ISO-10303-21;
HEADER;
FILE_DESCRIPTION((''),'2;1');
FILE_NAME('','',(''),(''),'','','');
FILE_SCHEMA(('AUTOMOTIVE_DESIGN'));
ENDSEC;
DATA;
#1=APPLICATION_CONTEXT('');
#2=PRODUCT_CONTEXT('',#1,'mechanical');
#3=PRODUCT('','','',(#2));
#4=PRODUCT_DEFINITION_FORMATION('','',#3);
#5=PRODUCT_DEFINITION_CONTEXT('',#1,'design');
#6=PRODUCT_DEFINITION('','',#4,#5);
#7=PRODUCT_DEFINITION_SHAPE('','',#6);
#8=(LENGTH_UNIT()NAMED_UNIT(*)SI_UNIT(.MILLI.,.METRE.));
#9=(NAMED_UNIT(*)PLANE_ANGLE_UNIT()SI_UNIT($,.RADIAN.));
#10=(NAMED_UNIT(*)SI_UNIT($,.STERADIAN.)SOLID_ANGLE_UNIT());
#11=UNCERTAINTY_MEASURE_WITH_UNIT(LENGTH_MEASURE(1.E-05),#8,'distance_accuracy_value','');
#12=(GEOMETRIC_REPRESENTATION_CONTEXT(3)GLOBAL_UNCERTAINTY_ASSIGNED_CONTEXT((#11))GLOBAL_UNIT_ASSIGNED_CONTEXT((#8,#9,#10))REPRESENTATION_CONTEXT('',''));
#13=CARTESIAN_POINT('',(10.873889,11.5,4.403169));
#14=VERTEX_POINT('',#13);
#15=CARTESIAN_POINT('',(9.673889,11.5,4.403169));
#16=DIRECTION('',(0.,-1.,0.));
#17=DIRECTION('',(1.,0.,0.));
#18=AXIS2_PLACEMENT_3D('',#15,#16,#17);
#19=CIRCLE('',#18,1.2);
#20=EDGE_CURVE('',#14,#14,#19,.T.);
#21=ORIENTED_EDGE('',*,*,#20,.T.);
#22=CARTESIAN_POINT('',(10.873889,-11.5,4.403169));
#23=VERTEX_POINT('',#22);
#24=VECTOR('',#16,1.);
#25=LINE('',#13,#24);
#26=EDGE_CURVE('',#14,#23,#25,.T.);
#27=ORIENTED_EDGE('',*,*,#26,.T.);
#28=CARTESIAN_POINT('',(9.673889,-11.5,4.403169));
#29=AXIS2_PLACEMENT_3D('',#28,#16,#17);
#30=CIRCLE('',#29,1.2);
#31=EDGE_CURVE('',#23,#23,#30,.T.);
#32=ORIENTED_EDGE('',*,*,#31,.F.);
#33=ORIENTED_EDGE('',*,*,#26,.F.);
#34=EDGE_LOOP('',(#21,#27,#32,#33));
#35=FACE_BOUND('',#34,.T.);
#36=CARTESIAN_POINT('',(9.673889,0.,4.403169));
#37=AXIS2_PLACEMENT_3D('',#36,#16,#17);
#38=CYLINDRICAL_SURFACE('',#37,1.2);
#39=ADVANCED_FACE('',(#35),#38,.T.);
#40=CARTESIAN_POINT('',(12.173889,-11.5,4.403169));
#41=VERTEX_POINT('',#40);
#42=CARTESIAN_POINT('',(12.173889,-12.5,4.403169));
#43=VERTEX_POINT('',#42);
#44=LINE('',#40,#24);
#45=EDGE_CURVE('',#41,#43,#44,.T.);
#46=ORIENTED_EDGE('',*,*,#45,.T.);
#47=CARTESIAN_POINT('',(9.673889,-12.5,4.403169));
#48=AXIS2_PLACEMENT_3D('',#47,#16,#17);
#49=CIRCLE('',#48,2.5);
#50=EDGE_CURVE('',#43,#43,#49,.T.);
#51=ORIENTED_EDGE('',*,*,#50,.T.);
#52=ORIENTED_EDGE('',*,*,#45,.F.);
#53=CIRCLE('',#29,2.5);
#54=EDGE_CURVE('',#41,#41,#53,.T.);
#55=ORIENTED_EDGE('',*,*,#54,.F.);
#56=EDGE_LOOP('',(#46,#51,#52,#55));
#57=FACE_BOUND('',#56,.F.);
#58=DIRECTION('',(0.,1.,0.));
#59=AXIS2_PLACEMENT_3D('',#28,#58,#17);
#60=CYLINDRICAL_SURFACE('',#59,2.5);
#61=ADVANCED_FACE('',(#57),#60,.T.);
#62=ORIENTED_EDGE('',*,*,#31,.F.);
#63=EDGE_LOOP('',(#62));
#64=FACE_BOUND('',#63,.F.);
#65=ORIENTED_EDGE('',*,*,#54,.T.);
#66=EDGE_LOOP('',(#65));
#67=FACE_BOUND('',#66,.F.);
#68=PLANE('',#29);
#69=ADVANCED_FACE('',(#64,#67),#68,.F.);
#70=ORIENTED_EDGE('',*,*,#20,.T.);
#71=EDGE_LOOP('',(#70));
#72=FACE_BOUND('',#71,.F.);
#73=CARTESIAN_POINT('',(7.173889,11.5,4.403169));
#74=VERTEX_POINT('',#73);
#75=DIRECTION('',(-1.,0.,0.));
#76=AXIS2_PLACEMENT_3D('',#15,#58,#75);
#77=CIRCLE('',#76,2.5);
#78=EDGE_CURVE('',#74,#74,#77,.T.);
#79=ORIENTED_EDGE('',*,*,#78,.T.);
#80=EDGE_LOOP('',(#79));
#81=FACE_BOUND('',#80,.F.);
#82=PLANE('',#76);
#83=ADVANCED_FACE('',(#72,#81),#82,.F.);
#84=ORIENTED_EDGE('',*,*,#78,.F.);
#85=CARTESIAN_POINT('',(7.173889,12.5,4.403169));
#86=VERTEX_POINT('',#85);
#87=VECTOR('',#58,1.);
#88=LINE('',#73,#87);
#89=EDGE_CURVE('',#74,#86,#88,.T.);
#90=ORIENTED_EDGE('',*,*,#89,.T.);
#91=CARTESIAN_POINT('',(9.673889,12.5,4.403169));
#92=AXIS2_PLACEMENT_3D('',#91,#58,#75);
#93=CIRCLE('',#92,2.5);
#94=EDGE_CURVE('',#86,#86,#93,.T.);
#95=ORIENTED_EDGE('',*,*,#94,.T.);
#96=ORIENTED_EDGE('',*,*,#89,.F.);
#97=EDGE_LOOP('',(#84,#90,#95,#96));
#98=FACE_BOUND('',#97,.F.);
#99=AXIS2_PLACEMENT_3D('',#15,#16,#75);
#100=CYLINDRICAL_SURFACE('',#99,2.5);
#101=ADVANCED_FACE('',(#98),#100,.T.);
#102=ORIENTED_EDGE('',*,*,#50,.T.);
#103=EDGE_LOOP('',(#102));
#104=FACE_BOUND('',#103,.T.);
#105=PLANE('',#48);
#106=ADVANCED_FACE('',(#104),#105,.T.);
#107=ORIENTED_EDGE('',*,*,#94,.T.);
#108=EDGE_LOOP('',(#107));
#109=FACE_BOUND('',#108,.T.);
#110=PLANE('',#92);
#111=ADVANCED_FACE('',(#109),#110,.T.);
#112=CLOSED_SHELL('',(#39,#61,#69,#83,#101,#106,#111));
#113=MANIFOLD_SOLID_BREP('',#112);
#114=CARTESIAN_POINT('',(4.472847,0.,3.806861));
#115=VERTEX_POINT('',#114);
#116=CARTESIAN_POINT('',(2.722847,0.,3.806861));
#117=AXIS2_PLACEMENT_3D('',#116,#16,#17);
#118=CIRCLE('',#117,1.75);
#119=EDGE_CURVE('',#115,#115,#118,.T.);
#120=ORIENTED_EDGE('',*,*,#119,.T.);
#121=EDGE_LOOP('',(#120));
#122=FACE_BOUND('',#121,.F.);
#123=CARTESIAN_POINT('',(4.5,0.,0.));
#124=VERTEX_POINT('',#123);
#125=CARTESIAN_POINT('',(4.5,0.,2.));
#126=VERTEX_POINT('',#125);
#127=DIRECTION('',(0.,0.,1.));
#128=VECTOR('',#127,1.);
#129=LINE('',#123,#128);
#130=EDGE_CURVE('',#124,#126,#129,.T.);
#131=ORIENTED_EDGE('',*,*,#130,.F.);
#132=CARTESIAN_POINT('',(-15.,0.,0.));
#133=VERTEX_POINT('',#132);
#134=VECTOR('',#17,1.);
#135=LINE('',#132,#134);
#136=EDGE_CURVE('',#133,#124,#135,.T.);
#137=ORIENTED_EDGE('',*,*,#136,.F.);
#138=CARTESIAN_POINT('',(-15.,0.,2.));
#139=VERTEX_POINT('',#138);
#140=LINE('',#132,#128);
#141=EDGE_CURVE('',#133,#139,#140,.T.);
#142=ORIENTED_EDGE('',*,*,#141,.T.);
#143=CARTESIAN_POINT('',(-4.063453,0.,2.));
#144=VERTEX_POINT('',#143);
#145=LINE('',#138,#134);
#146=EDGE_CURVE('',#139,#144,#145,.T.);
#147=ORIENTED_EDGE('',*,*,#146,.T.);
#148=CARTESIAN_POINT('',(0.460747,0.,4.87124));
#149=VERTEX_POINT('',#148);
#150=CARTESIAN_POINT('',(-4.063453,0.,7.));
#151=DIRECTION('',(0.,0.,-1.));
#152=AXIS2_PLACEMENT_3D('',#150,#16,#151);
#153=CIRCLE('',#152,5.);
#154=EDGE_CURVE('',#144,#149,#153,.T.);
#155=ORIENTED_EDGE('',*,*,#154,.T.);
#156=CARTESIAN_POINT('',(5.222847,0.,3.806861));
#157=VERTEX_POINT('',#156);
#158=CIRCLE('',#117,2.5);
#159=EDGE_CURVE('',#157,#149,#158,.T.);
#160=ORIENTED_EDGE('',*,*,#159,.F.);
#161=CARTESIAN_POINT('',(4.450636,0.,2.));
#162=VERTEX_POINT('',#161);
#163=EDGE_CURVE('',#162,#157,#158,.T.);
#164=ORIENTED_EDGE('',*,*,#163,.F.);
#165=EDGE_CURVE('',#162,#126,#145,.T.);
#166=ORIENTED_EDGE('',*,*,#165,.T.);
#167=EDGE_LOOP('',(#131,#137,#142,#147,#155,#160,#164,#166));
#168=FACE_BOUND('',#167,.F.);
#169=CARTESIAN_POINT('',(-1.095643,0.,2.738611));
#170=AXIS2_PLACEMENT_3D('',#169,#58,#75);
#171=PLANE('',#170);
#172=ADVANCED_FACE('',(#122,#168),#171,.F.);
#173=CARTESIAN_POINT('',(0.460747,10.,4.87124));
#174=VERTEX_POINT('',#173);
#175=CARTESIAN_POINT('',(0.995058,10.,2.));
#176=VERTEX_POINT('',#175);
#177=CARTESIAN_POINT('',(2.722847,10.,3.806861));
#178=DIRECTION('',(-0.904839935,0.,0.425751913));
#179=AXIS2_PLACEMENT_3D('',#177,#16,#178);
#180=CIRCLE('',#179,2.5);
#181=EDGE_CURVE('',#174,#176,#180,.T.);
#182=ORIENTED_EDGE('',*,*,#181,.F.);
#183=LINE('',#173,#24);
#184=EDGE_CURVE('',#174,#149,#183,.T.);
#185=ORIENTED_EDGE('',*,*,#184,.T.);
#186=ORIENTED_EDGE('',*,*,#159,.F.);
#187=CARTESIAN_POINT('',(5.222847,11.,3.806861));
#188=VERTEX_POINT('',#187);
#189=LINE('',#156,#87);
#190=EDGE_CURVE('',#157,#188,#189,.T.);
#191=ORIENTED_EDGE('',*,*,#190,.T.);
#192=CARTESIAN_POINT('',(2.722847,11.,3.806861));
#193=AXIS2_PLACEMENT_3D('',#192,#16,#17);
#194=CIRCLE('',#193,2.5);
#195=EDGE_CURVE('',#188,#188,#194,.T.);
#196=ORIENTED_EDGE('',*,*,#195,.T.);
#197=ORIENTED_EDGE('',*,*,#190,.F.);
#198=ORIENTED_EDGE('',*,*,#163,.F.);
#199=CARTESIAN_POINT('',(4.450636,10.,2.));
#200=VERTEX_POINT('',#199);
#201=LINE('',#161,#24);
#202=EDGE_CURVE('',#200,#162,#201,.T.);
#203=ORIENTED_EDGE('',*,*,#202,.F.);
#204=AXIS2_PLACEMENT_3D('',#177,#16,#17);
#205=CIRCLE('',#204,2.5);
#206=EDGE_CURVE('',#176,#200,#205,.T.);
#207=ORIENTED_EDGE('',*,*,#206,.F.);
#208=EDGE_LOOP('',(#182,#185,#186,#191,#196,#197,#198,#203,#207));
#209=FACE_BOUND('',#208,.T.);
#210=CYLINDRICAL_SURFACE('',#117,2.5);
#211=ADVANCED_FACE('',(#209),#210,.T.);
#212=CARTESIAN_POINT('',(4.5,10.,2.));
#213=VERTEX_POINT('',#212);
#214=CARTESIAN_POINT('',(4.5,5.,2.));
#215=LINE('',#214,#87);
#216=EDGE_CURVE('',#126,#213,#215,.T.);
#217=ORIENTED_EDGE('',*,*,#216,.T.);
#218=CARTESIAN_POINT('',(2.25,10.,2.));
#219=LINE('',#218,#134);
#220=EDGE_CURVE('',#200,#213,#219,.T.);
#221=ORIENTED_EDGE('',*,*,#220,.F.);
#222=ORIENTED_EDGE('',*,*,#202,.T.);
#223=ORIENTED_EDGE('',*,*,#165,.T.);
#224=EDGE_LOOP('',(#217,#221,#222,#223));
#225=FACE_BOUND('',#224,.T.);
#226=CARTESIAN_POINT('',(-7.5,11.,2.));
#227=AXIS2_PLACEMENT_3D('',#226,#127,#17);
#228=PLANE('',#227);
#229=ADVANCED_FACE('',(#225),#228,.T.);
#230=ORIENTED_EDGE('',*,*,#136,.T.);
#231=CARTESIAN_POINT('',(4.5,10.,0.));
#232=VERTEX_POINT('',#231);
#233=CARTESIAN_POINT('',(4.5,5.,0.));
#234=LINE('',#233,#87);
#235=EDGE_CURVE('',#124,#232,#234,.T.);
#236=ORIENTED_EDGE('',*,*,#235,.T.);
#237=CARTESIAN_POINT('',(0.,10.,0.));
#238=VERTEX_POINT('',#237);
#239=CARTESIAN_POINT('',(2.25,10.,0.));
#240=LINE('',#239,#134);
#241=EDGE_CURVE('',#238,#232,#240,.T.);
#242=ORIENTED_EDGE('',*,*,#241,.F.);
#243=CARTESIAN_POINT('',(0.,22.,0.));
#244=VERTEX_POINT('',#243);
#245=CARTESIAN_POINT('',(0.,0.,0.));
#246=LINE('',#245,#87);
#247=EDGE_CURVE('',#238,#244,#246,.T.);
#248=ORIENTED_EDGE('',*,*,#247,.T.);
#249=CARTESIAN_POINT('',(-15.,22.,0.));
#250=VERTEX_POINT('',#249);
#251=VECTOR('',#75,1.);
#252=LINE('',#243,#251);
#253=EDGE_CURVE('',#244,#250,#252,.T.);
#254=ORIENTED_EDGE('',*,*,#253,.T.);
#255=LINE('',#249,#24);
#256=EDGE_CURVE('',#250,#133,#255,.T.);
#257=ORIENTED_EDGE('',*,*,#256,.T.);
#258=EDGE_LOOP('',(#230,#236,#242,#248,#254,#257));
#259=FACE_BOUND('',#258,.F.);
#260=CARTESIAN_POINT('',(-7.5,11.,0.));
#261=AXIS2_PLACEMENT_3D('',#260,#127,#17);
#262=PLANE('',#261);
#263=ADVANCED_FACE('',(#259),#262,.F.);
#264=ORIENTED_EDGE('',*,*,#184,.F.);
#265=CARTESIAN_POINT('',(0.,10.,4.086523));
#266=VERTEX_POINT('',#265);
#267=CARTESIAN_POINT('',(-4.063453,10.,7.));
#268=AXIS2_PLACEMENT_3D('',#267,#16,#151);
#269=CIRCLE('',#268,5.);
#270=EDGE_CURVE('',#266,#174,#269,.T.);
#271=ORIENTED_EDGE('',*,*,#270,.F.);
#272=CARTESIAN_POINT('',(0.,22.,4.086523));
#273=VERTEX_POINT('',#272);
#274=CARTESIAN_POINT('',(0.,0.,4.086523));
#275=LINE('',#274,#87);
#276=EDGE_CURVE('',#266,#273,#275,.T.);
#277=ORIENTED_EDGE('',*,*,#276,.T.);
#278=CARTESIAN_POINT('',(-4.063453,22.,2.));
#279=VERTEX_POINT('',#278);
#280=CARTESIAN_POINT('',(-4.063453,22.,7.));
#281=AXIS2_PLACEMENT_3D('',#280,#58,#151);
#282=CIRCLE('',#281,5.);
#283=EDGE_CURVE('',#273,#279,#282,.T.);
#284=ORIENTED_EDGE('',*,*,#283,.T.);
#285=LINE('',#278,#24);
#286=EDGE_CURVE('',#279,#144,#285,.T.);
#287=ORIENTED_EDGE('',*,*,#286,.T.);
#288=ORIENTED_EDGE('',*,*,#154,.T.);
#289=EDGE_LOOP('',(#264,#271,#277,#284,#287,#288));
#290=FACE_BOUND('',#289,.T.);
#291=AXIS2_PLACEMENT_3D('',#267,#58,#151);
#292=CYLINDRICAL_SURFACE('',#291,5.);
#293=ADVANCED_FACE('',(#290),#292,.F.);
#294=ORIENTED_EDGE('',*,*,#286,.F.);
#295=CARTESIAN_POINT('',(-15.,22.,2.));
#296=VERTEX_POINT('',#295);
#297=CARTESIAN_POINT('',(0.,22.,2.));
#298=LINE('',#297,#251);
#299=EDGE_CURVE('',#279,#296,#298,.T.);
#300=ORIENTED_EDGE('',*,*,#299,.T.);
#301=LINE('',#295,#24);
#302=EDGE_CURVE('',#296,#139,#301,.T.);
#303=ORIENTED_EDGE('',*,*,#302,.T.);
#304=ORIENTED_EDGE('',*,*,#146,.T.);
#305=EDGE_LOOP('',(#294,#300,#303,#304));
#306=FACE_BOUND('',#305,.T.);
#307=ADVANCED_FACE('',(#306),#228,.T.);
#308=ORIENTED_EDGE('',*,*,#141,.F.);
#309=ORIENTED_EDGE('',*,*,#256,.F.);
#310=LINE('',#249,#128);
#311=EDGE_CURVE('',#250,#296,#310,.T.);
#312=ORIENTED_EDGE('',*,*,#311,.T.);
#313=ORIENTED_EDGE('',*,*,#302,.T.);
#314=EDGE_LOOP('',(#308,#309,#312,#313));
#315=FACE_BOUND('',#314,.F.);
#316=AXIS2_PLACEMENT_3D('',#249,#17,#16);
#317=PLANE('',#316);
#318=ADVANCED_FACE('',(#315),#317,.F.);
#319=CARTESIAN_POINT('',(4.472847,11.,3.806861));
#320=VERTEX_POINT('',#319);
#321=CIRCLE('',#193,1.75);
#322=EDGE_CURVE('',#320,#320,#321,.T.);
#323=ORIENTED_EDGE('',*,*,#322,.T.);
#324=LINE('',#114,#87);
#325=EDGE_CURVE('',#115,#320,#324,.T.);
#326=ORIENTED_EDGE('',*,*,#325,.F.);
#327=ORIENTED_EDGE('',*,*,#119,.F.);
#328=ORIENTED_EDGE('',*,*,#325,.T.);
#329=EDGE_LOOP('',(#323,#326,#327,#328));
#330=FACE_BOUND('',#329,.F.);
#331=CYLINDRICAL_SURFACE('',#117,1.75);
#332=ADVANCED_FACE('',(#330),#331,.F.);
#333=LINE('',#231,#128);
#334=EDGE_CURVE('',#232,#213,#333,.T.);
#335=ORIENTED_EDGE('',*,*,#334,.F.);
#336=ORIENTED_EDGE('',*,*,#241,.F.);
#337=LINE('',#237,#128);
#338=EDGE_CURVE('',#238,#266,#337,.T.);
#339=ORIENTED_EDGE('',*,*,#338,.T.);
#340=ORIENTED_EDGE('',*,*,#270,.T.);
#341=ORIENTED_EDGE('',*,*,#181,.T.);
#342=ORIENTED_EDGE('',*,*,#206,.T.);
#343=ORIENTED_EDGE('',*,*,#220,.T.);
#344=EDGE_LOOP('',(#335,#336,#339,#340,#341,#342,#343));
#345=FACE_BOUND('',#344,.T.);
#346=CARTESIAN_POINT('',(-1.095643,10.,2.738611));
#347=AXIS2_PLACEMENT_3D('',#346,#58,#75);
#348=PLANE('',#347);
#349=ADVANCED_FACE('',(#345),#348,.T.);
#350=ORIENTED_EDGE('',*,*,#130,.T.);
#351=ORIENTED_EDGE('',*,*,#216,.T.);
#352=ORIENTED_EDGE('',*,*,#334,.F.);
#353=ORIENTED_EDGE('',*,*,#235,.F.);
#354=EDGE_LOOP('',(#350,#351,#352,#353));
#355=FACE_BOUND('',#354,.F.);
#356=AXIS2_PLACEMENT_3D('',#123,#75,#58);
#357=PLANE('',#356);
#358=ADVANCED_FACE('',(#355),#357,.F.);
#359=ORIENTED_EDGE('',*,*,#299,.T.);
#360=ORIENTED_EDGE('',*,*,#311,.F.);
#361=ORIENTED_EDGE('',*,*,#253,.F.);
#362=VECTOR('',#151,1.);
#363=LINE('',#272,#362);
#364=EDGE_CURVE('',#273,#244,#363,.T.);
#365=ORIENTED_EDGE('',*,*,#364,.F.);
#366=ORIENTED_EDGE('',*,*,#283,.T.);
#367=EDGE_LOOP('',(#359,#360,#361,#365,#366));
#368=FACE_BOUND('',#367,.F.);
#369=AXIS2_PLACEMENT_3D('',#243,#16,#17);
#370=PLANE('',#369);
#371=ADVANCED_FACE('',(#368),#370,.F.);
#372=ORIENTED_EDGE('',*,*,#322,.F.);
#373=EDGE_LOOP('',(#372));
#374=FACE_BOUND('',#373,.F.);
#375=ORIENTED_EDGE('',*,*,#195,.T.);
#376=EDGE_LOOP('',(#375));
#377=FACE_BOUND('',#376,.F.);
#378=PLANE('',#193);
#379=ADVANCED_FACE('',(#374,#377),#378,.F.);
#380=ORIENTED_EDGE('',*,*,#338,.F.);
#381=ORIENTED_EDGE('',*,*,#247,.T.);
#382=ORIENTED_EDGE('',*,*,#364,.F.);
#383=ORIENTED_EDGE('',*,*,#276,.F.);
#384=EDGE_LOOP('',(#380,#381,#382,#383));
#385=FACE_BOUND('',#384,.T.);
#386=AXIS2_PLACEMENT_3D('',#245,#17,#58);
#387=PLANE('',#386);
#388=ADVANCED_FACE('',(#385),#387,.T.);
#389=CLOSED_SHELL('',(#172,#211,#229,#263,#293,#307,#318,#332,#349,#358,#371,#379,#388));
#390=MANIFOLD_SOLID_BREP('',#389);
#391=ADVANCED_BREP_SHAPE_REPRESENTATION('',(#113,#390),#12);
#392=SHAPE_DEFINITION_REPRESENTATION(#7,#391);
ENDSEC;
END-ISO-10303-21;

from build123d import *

# Parameters (mm, degrees)
F0_W         = 4.5
F0_H         = 10
F1_DEPTH     = 2
F2_R         = 2.5
F2_R_2       = 1.75
F3_DEPTH     = 11
F4_T4_DEPTH  = 22.646276463
F4_T11_DEPTH = 22.646276463
F4_T18_DEPTH = 10
F4_T23_DEPTH = 10
F5_R         = 1.2
F6_DEPTH     = 11.5
F7_R         = 2.5
F8_DEPTH     = 1
F9_R         = 2.5
F10_DEPTH    = 1


# Not quite as in the source:
# - a fillet or chamfer that OpenCascade refuses, or shapes differently, is made with other operations: its cross-section is extruded or revolved along the edge and cut away or added


with BuildPart() as f1:
    # F0 (on Top) → F1 (new body)
    with BuildSketch(Plane.XY):
        Polygon((-15, 0), (0, 0), (0, 10), (0, 22), (-15, 22), align=None)
        with Locations((2.25, 5)):
            Rectangle(F0_W, F0_H)
    extrude(amount=F1_DEPTH)

    # F2 (on Front) → F3 (join)
    with BuildSketch(Plane.XZ):
        with Locations((2.7228465769, 3.8068606518)):
            Circle(F2_R)
        with Locations((2.7228465769, 3.8068606518)):
            Circle(F2_R_2, mode=Mode.SUBTRACT)
    extrude(amount=-F3_DEPTH)

    # F4: fillet of radius 5 on 1 edges, made by hand


with BuildPart() as f4_tool2:
    # F4_s3 → F4_t4 (new body)
    with BuildSketch(Plane.XZ.offset(-22.646276463)):
        with BuildLine():
            ThreePointArc((-4.0634529377, 2), (-1.3842550939, 2.7784009056), (0.4607467387, 4.8712404345))
            ThreePointArc((0.4607467387, 4.8712404345), (0.2650409494, 3.3494860821), (0.9950576474, 2))
            Line((0.9950576474, 2), (-4.0634529377, 2))
        make_face()
    extrude(amount=F4_T4_DEPTH)

    split(bisect_by=Plane.XZ.offset(-22), keep=Keep.TOP)

    split(bisect_by=Plane.YZ, keep=Keep.BOTTOM)

    split(bisect_by=Plane.XZ.offset(-11), keep=Keep.BOTTOM)


with BuildPart() as f1_1:
    add(f1.part)

    # F4_t1: union F4_tool2
    add(f4_tool2.part)


with BuildPart() as f4_tool9:
    # F4_s10 → F4_t11 (new body)
    with BuildSketch(Plane.XZ.offset(-22.646276463)):
        with BuildLine():
            ThreePointArc((-4.0634529377, 2), (-1.3842550939, 2.7784009056), (0.4607467387, 4.8712404345))
            ThreePointArc((0.4607467387, 4.8712404345), (0.2650409494, 3.3494860821), (0.9950576474, 2))
            Line((0.9950576474, 2), (-4.0634529377, 2))
        make_face()
    extrude(amount=F4_T11_DEPTH)

    split(bisect_by=Plane.YZ, keep=Keep.BOTTOM)

    split(bisect_by=Plane.XZ.offset(-10), keep=Keep.BOTTOM)

    split(bisect_by=Plane.XZ.offset(-11), keep=Keep.TOP)


with BuildPart() as f1_2:
    add(f1_1.part)

    # F4_t8: union F4_tool9
    add(f4_tool9.part)


with BuildPart() as f4_tool16:
    # F4_s17 → F4_t18 (new body)
    with BuildSketch(Plane.XZ.offset(-10)):
        with BuildLine():
            ThreePointArc((-4.0634529377, 2), (-1.3842550939, 2.7784009056), (0.4607467387, 4.8712404345))
            ThreePointArc((0.4607467387, 4.8712404345), (0.2650409494, 3.3494860821), (0.9950576474, 2))
            Line((0.9950576474, 2), (-4.0634529377, 2))
        make_face()
    extrude(amount=F4_T18_DEPTH)

    split(bisect_by=Plane.YZ, keep=Keep.BOTTOM)


with BuildPart() as f1_3:
    add(f1_2.part)

    # F4_t15: union F4_tool16
    add(f4_tool16.part)


with BuildPart() as f4_tool21:
    # F4_s22 → F4_t23 (new body)
    with BuildSketch(Plane.XZ.offset(-10)):
        with BuildLine():
            ThreePointArc((-4.0634529377, 2), (-1.3842550939, 2.7784009056), (0.4607467387, 4.8712404345))
            ThreePointArc((0.4607467387, 4.8712404345), (0.2650409494, 3.3494860821), (0.9950576474, 2))
            Line((0.9950576474, 2), (-4.0634529377, 2))
        make_face()
    extrude(amount=F4_T23_DEPTH)

    split(bisect_by=Plane.YZ, keep=Keep.TOP)


with BuildPart() as f1_4:
    add(f1_3.part)

    # F4_t20: union F4_tool21
    add(f4_tool21.part)


with BuildPart() as f6:
    # F5 (on Front) → F6 (new body, symmetric)
    with BuildSketch(Plane.XZ):
        with Locations((9.6738887951, 4.4031692669)):
            Circle(F5_R)
    extrude(amount=F6_DEPTH, both=True)

    # F7 (on face) → F8 (join)
    with BuildSketch(Plane(origin=(0, 11.5, 0), x_dir=(-1, 0, 0), z_dir=(0, 1, 0))):
        with Locations((-9.6738887951, 4.4031692669)):
            Circle(F7_R)
    extrude(amount=F8_DEPTH)

    # F9 (on face) → F10 (join)
    with BuildSketch(Plane.XZ.offset(11.5)):
        with Locations((9.6738887951, 4.4031692669)):
            Circle(F9_R)
    extrude(amount=F10_DEPTH)


solid = Compound([f1_4.part, f6.part])
